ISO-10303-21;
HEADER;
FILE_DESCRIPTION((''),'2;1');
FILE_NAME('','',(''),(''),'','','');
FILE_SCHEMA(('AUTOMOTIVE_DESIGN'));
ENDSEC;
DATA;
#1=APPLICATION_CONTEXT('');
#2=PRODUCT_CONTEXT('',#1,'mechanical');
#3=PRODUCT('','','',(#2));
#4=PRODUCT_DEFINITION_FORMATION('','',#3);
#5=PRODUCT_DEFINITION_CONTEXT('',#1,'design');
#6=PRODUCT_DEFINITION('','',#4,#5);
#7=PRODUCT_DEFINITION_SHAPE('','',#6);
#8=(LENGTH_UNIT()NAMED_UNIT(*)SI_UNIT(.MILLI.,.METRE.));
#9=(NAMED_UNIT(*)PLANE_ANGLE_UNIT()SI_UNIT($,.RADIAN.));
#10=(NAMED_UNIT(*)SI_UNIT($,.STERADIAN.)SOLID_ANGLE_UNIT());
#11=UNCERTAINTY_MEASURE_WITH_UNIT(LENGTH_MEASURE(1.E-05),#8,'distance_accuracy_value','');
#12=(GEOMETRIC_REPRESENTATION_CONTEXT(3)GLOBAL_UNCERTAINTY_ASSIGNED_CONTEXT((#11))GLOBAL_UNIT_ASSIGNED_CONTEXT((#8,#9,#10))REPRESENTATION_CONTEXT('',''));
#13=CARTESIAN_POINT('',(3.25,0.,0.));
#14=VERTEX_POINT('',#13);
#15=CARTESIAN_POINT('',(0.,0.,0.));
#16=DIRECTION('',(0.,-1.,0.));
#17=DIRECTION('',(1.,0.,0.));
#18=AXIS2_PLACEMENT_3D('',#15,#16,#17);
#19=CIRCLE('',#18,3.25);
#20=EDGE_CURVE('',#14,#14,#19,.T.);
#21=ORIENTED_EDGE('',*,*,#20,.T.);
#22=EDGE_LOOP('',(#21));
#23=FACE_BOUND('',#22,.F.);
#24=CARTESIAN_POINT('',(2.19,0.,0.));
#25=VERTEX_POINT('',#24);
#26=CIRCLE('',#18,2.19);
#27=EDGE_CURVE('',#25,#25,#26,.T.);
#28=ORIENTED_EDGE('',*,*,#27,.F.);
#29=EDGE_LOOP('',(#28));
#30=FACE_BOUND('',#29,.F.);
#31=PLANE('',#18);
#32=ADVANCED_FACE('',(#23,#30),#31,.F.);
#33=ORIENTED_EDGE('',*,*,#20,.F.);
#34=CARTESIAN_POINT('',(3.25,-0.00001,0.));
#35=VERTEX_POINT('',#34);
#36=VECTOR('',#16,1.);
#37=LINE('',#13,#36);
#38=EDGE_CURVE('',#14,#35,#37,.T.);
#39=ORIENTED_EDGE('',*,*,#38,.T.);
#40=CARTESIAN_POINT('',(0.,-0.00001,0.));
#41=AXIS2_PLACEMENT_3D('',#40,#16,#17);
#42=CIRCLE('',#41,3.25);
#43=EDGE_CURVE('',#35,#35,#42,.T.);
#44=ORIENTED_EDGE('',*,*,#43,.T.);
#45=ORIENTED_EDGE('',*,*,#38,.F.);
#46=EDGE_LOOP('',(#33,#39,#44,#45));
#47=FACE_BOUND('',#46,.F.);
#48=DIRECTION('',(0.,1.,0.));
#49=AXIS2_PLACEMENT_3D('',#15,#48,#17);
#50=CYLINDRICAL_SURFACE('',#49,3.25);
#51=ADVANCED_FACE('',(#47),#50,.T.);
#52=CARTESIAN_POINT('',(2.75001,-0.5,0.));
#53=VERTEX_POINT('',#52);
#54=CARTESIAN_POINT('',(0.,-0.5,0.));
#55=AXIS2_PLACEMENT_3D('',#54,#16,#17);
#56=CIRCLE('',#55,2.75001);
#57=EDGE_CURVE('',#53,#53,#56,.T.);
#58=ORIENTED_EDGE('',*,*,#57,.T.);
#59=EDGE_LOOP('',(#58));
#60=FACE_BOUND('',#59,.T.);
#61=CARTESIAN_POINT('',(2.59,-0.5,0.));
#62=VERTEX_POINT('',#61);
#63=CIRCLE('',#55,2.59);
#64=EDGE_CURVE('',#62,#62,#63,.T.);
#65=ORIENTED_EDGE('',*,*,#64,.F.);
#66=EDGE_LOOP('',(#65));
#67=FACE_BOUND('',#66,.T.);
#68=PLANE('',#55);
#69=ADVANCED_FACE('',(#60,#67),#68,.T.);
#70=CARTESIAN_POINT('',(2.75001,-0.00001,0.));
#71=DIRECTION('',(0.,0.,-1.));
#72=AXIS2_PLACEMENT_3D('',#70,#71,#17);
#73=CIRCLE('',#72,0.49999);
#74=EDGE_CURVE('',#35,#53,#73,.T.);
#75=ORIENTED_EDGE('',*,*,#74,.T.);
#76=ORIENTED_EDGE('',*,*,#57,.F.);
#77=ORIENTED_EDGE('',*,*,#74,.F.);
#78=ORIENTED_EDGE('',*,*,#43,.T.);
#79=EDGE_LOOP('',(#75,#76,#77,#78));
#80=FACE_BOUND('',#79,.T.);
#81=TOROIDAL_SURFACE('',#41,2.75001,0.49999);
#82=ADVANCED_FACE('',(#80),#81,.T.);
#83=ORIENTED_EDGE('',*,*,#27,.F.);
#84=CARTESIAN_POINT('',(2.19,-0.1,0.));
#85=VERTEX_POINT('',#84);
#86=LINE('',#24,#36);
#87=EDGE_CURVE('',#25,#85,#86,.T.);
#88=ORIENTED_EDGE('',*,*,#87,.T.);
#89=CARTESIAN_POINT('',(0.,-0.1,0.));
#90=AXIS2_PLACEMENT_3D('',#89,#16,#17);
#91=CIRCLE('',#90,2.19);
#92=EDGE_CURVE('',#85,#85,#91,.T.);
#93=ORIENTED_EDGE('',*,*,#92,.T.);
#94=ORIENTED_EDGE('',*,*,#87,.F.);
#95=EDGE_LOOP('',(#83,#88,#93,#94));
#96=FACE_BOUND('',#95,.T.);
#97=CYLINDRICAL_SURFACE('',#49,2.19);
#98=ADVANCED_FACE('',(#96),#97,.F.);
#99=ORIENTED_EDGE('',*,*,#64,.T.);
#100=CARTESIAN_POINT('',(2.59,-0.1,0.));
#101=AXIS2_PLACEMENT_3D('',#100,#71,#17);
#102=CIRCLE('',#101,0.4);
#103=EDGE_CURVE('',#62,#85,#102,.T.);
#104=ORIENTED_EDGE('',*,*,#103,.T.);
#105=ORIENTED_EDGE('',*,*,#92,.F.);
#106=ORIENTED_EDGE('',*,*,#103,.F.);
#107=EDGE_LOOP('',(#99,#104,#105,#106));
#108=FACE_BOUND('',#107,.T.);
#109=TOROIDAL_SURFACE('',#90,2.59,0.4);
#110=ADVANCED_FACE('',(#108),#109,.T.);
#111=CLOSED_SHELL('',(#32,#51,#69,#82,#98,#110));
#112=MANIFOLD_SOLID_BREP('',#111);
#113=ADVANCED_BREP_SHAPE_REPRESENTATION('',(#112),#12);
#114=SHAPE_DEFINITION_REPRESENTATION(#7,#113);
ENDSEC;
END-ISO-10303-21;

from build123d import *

# Parameters (mm, degrees)
F0_R     = 3.25
F0_R_2   = 2.19
F1_DEPTH = 0.5
F2_R     = 0.49999
F3_R     = 0.4


# Not quite as in the source:
# - a fillet or chamfer is up to 0.001 mm smaller than in the source, because OpenCascade refuses the exact size


with BuildPart() as f1:
    # F0 (on Front) → F1 (new body)
    with BuildSketch(Plane.XZ):
        Circle(F0_R)
        Circle(F0_R_2, mode=Mode.SUBTRACT)
    extrude(amount=F1_DEPTH)

    # F2 (radius 0.5 in the source; OpenCascade refuses exactly that, so slightly less here)
    f2_edges = [f1.edges().sort_by_distance(p)[0] for p in [
        (-3.25, -0.5, 0),
    ]]
    fillet(f2_edges, radius=F2_R)

    # F3
    f3_edges = [f1.edges().sort_by_distance(p)[0] for p in [
        (-2.19, -0.5, 0),
    ]]
    fillet(f3_edges, radius=F3_R)


solid = f1.part
